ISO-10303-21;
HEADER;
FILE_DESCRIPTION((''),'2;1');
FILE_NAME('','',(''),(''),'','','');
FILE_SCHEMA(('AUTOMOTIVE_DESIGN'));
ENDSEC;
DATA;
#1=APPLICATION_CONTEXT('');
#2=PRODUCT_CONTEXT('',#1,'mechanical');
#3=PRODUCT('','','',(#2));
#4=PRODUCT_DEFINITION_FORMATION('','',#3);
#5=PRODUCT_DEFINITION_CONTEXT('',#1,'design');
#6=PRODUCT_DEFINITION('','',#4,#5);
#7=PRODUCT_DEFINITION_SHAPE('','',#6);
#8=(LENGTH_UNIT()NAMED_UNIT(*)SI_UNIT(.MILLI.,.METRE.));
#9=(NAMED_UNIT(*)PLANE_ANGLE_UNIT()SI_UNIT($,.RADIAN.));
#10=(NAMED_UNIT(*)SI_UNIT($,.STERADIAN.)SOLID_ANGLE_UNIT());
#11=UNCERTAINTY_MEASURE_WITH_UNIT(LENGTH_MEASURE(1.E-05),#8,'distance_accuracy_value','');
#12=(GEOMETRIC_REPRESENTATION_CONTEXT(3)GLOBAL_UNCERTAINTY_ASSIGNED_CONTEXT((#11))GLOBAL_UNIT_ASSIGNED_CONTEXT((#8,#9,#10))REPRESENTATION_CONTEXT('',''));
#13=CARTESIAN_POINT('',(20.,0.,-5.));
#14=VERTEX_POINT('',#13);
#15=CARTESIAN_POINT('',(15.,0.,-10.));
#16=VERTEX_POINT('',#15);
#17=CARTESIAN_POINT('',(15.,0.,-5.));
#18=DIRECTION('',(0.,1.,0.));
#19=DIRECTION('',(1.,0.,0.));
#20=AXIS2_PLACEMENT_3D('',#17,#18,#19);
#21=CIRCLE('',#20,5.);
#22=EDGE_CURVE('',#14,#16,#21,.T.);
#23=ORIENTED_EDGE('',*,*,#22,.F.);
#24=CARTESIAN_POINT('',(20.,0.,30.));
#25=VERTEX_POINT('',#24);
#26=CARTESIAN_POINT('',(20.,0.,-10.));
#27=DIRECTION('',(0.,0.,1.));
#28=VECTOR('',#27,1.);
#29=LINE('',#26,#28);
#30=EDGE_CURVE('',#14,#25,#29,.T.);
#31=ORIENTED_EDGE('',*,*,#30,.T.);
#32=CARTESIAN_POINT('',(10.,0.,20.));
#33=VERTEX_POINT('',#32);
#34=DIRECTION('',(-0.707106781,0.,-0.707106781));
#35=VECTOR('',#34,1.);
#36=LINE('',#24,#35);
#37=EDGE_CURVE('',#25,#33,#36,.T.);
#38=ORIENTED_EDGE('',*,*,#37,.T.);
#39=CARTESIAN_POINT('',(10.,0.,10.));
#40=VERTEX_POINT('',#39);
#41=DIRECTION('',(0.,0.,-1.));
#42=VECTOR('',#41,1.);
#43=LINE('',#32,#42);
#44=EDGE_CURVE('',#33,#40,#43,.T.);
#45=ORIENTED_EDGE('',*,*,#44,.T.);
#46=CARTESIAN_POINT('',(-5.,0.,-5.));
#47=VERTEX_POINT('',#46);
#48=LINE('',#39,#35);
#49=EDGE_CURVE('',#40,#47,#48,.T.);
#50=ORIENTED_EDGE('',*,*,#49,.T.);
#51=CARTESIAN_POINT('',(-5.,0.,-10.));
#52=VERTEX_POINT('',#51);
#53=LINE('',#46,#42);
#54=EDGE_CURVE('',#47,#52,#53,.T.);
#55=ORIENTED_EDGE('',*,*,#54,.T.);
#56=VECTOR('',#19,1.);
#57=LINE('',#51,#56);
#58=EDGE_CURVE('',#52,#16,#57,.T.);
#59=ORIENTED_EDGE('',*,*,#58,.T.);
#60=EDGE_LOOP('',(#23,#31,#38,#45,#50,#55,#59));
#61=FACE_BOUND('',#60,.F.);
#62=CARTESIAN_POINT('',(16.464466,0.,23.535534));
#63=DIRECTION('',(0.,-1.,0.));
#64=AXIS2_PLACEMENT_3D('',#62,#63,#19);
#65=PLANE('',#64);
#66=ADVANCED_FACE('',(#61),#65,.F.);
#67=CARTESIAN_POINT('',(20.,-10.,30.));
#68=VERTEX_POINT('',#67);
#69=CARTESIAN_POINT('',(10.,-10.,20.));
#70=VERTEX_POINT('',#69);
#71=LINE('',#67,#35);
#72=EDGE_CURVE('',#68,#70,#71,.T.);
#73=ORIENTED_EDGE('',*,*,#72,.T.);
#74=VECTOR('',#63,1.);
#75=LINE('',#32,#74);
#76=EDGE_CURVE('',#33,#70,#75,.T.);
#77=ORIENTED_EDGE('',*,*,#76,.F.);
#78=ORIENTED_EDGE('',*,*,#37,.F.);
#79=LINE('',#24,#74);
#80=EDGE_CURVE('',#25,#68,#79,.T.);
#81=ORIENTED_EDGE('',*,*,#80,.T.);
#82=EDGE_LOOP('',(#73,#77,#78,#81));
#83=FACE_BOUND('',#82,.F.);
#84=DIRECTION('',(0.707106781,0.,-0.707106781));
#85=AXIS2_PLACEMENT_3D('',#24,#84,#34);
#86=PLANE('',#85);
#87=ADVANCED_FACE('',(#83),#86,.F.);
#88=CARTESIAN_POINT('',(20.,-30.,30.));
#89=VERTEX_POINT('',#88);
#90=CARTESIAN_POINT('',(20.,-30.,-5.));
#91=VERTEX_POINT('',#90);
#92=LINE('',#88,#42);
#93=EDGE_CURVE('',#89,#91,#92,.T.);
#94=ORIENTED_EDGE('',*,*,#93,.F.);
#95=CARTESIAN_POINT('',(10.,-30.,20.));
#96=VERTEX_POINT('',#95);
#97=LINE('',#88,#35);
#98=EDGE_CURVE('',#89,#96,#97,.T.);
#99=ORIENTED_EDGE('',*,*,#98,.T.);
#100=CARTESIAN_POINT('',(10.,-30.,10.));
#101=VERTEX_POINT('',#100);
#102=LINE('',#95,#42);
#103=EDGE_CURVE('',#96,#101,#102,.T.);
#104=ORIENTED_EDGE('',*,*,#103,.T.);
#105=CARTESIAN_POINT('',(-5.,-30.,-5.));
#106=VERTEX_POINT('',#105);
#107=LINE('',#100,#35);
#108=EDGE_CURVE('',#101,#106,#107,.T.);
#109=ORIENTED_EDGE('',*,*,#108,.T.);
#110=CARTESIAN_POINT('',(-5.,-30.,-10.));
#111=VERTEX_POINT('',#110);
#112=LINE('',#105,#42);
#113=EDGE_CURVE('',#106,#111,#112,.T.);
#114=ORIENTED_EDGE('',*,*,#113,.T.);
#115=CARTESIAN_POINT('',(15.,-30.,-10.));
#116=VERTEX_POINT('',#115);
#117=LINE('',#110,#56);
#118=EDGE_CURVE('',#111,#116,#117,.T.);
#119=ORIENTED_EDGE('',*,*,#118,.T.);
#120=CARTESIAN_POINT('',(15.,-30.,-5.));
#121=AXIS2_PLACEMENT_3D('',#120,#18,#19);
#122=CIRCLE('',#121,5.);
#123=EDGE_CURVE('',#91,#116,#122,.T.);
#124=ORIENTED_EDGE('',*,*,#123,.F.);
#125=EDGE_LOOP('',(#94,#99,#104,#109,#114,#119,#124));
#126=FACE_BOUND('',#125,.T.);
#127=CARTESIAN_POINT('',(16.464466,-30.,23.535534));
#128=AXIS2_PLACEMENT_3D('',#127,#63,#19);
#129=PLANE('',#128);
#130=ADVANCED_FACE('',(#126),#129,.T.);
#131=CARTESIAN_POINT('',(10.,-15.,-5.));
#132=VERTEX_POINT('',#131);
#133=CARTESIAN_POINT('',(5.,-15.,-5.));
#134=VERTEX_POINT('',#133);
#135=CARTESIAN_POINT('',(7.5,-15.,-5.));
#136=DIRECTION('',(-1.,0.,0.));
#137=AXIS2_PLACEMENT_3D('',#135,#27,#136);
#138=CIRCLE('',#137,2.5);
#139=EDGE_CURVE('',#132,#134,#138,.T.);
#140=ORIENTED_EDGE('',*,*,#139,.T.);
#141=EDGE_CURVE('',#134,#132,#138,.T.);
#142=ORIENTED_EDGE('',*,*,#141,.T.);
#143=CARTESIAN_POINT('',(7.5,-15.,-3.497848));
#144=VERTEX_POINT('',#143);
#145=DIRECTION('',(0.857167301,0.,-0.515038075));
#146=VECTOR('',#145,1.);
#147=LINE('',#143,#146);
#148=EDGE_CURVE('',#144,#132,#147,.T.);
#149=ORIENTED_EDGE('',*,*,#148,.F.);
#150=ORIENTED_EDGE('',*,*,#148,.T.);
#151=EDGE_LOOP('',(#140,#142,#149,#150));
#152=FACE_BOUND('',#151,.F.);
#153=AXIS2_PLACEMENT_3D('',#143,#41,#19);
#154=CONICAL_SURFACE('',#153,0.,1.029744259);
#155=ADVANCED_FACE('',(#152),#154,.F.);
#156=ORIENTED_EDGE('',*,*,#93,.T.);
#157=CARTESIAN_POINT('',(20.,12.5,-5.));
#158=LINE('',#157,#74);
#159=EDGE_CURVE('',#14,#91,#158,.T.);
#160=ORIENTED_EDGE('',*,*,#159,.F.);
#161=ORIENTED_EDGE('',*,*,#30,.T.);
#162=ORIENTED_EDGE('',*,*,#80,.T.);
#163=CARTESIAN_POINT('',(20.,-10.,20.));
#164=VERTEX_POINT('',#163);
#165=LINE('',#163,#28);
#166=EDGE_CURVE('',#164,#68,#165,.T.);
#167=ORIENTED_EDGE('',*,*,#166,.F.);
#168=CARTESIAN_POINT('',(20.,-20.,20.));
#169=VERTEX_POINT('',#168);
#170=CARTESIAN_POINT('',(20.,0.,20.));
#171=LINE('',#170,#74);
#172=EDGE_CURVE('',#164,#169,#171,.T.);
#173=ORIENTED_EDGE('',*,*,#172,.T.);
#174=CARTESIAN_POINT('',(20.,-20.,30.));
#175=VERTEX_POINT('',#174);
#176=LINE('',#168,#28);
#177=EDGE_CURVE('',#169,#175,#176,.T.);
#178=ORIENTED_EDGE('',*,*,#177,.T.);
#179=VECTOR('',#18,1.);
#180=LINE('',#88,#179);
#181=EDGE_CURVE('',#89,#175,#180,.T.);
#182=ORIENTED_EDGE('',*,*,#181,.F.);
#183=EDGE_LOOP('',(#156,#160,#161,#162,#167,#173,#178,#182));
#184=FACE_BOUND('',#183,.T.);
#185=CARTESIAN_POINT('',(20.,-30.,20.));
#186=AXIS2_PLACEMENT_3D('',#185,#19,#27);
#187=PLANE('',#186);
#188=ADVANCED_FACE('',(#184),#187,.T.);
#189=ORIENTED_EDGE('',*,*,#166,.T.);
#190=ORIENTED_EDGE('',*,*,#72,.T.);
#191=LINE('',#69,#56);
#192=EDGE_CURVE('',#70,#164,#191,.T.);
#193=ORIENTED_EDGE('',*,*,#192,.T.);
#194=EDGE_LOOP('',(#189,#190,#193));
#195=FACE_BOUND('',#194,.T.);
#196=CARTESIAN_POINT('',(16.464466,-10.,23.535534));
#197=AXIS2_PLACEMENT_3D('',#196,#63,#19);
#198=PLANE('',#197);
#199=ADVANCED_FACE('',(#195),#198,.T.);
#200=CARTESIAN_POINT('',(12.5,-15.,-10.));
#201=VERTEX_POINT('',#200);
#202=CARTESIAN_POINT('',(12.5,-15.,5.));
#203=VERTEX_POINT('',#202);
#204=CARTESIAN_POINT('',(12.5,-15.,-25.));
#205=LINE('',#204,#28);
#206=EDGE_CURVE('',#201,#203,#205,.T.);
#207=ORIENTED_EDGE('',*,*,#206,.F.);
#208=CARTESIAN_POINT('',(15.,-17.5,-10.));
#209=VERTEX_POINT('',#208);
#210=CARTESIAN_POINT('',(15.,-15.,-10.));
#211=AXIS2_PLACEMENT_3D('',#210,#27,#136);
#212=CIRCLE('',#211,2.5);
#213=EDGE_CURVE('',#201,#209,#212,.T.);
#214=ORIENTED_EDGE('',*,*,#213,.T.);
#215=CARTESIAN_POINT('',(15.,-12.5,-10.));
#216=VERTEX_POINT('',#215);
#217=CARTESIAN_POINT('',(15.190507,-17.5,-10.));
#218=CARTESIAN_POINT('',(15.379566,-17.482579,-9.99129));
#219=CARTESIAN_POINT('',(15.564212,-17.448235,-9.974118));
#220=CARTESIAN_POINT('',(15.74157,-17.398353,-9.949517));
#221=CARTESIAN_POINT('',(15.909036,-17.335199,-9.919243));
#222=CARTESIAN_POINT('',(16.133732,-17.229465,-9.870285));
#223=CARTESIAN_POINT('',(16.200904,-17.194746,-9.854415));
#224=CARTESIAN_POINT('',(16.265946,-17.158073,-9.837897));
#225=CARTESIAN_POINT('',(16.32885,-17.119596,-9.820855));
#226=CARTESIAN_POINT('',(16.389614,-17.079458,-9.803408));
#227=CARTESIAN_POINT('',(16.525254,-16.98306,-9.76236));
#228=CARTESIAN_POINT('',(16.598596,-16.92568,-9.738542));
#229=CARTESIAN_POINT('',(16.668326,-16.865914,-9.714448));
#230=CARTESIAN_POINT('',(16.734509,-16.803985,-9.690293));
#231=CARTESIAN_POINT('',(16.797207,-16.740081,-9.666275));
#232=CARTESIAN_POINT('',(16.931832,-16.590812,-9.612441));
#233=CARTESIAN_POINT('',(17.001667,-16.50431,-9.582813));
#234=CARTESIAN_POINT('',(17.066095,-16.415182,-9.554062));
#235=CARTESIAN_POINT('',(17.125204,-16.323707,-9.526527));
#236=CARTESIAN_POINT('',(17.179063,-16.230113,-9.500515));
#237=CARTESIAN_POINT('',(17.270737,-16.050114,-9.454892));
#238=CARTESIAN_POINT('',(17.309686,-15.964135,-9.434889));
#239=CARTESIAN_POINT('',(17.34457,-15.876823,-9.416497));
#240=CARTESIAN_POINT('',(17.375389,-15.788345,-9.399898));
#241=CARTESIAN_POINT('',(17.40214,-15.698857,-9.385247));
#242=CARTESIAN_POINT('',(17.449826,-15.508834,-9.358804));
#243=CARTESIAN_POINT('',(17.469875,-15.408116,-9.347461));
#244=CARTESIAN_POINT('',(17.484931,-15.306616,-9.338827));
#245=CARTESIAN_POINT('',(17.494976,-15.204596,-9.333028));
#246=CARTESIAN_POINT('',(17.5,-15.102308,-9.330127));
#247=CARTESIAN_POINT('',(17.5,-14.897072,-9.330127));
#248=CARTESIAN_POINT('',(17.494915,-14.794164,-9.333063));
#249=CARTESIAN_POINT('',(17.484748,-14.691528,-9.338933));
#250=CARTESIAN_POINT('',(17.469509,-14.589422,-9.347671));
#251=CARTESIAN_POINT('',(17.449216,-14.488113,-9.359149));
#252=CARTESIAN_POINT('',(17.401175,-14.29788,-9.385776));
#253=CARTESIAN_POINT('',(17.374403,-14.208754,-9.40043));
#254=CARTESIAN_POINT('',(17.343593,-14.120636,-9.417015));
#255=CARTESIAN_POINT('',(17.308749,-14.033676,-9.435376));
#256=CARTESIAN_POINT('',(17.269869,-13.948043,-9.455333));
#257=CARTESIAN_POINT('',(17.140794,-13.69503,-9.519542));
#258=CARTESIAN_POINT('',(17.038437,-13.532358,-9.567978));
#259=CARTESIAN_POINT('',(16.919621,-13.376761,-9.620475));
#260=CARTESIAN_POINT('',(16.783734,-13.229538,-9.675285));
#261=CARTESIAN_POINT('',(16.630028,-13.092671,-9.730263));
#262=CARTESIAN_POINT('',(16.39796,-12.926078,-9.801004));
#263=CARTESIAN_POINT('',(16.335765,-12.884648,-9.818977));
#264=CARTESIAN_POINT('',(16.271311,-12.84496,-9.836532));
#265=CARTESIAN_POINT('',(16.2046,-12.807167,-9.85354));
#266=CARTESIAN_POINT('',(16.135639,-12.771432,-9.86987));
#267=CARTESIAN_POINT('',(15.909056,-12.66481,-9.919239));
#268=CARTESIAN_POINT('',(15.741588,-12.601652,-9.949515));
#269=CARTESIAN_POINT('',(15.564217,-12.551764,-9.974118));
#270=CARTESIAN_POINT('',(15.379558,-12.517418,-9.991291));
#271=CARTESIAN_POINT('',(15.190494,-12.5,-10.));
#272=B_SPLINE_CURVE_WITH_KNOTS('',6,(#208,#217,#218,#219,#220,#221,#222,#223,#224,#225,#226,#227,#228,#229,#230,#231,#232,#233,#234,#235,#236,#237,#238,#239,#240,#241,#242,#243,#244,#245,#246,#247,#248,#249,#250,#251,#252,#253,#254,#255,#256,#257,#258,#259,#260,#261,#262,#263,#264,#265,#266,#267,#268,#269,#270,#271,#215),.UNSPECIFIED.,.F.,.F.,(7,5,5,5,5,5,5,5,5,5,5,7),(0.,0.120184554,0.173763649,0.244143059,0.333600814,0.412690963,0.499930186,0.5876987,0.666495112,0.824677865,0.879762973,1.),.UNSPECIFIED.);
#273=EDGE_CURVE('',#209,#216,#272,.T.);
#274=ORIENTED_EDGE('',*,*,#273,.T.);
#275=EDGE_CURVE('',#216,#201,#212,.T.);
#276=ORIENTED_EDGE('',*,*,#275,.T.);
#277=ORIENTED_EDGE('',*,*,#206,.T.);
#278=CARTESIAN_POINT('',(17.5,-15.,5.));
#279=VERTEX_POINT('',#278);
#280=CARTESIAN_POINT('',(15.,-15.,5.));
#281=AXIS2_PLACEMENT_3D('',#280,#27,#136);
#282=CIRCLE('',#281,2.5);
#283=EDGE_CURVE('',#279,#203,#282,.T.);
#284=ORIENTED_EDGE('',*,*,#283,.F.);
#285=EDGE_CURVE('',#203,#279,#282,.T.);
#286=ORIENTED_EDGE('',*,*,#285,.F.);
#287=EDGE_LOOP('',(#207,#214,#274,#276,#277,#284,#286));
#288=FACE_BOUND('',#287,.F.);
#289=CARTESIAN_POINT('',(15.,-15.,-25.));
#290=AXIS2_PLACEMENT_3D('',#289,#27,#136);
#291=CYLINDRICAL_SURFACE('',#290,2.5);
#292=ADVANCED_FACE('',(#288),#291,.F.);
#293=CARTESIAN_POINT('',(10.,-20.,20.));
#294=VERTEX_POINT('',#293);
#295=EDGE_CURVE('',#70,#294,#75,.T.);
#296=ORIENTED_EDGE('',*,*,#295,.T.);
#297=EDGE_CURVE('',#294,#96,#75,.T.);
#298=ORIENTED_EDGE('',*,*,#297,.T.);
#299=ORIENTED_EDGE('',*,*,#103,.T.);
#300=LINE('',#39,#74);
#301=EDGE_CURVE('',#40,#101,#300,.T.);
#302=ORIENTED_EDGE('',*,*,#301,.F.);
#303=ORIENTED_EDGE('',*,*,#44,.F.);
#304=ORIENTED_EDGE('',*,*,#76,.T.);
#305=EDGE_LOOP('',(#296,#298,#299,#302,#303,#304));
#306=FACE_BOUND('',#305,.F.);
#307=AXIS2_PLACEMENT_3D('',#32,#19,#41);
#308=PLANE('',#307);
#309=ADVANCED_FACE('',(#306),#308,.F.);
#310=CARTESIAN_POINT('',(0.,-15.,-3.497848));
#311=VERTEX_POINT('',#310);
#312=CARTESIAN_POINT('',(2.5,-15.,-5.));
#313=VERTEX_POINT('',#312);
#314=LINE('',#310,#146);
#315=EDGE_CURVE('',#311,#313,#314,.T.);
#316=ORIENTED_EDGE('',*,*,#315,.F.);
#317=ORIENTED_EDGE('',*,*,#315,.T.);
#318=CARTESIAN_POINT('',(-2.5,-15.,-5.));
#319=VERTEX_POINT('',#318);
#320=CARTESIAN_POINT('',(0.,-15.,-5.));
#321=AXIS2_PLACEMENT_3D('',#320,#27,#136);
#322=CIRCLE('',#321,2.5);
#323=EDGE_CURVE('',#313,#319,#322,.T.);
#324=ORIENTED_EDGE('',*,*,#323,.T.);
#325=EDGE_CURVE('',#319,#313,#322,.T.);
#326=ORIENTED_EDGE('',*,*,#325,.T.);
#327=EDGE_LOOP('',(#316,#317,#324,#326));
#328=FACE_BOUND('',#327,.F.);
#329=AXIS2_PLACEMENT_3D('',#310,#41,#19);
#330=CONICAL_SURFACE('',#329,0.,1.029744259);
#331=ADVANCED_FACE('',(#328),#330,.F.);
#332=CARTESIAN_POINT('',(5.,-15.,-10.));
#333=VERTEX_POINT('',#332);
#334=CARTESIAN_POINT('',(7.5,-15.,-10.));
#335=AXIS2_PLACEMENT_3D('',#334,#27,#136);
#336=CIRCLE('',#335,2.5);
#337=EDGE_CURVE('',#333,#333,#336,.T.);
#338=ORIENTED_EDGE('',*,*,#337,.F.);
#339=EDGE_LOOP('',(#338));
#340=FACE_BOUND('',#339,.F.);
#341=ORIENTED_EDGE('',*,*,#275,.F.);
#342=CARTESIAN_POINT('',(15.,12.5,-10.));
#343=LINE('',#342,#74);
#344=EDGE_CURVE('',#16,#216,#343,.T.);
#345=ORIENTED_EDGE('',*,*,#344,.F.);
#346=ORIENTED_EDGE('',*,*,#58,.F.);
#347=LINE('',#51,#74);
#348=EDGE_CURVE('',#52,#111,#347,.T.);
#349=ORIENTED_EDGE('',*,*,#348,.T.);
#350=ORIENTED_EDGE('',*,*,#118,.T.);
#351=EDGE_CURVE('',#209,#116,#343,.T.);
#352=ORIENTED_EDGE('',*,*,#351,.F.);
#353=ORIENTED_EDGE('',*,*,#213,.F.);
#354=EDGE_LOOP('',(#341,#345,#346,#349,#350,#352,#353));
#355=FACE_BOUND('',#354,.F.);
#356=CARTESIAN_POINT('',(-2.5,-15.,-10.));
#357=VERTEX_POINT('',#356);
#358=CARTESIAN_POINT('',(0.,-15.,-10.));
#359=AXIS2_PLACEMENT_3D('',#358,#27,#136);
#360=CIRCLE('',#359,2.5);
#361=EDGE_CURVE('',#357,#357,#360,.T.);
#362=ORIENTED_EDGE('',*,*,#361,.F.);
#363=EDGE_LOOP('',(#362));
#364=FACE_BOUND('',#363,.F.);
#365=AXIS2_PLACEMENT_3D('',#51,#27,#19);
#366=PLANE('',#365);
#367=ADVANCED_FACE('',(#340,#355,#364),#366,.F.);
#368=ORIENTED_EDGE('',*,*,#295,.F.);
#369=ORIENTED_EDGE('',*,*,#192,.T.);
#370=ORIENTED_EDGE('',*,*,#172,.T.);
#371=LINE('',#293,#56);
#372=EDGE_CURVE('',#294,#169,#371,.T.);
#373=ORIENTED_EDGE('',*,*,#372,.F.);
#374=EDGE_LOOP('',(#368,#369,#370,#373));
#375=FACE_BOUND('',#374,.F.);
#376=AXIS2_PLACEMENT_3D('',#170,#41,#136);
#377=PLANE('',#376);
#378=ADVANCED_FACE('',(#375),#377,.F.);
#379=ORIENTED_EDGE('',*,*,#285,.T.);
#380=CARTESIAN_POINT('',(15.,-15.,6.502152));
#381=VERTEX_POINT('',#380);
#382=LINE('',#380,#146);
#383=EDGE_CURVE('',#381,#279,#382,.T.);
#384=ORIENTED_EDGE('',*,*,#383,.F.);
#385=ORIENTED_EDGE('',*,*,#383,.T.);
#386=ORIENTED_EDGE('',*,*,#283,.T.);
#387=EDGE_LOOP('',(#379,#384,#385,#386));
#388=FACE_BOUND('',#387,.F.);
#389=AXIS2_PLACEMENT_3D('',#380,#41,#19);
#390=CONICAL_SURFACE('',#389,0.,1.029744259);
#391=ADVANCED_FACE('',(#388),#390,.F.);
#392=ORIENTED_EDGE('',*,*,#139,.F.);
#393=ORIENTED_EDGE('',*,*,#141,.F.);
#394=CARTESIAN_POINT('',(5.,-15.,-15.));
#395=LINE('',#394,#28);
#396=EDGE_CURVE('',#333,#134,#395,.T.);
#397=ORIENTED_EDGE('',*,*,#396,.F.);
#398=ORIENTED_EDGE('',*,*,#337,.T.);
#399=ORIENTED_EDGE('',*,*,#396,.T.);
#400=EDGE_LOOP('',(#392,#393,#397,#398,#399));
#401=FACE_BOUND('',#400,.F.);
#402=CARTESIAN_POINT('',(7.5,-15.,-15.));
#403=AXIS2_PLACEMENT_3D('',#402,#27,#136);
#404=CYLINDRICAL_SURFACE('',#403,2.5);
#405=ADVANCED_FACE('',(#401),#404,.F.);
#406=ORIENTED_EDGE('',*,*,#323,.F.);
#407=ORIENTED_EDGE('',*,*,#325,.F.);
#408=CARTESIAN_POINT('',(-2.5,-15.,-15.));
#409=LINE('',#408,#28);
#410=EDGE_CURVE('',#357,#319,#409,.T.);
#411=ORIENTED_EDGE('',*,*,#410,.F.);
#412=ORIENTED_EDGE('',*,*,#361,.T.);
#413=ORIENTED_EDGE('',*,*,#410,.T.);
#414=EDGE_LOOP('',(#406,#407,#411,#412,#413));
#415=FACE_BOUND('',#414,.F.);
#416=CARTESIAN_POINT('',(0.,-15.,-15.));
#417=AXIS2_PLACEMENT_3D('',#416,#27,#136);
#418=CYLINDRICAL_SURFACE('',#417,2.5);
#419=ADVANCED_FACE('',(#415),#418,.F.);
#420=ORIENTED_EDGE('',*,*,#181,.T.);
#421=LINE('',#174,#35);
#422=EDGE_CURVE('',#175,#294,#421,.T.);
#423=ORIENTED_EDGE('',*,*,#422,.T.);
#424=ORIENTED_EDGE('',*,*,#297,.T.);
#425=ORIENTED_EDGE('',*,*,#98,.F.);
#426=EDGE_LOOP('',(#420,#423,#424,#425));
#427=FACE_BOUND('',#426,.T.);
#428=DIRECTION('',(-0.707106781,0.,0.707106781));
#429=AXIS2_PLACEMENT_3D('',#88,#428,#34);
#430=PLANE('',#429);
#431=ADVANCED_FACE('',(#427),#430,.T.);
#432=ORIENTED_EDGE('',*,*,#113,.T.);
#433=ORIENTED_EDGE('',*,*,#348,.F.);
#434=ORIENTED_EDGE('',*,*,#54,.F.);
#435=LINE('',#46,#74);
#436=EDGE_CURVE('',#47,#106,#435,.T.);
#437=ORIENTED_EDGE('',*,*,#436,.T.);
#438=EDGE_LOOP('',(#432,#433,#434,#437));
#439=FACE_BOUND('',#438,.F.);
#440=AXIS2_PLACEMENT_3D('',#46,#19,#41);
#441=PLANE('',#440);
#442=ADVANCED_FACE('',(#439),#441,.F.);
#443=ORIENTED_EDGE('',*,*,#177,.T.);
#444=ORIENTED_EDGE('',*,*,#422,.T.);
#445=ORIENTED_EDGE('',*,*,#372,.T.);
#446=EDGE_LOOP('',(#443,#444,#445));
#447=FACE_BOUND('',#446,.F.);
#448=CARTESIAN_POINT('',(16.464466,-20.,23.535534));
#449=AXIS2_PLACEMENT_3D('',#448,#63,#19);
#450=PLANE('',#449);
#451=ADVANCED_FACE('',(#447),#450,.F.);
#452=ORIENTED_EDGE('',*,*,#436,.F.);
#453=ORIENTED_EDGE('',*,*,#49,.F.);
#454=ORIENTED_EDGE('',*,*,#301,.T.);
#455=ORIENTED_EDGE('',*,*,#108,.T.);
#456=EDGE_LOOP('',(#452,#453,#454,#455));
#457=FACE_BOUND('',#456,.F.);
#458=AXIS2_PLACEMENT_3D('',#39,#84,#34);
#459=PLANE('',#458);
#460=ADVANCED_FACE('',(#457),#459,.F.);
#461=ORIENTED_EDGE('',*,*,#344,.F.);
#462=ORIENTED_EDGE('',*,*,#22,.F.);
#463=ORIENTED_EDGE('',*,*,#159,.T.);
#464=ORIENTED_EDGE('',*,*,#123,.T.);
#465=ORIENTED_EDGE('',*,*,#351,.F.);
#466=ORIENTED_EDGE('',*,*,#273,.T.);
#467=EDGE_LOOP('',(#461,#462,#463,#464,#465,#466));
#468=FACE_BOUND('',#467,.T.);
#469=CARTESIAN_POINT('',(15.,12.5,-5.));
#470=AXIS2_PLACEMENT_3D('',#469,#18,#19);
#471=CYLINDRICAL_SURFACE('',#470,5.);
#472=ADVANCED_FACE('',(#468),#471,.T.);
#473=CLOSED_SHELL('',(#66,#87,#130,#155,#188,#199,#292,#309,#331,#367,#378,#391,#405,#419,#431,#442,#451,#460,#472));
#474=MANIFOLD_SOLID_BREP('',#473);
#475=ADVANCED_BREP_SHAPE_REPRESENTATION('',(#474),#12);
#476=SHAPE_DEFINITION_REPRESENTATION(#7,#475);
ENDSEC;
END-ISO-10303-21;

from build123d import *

# Parameters (mm, degrees)
F5_W        = 10
F5_H        = 10
F0_DEPTH    = 30
F1_DEPTH    = 10
F7_DEPTH    = 10
F3_D        = 5
F3_DEPTH    = 15
F3_TIP      = 1.5021515476
F8_D        = 5
F8_DEPTH    = 5
F8_TIP      = 1.5021515476
F4_T1_DEPTH = 55


# Not quite as in the source:
# - a fillet or chamfer that OpenCascade refuses, or shapes differently, is made with other operations: its cross-section is extruded or revolved along the edge and cut away or added


with BuildPart() as f0:
    # F5 (on Front) → F0 (new body)
    with BuildSketch(Plane.XZ):
        Polygon((10, 20), (10, 10), (20, 20), align=None)
        Polygon((20, 20), (10, 10), (20, 10), align=None)
        with Locations((15, 5)):
            Rectangle(F5_W, F5_H)
        Polygon((10, 10), (0, 0), (10, 0), align=None)
        Polygon((10, 0), (0, 0), (-5, -5), (-5, -10), (20, -10), (20, 0), align=None)
    extrude(amount=F0_DEPTH)

    # F5 (on Front) → F1 (join)
    with BuildSketch(Plane.XZ):
        Polygon((10, 20), (20, 20), (20, 30), align=None)
    extrude(amount=F1_DEPTH)

    # F6 (on face) → F7 (join)
    with BuildSketch(Plane.XZ.offset(30)):
        Polygon((10, 20), (20, 20), (20, 30), align=None)
    extrude(amount=-F7_DEPTH)

    # F3
    with Locations(Plane(origin=(0, 0, -10), x_dir=(1, 0, 0), z_dir=(0, 0, -1))):
        with Locations((15, 15)):
            Hole(F3_D / 2, depth=F3_DEPTH)
            with Locations((0, 0, -(F3_DEPTH + F3_TIP / 2))):  # 118° drill point
                Cone(0, F3_D / 2, F3_TIP, mode=Mode.SUBTRACT)

    # F8
    with Locations(Plane(origin=(0, 0, -10), x_dir=(1, 0, 0), z_dir=(0, 0, -1))):
        with Locations((7.5, 15), (0, 15)):
            Hole(F8_D / 2, depth=F8_DEPTH)
            with Locations((0, 0, -(F8_DEPTH + F8_TIP / 2))):  # 118° drill point
                Cone(0, F8_D / 2, F8_TIP, mode=Mode.SUBTRACT)

    # F4: fillet of radius 5 on 1 edges, made by hand

    # F4_s2 → F4_t1 (cut)
    with BuildSketch(Plane.XZ.offset(-12.5)):
        with BuildLine():
            ThreePointArc((20, -5), (18.5355339059, -8.5355339059), (15, -10))
            Line((15, -10), (20, -10))
            Line((20, -10), (20, -5))
        make_face()
    extrude(amount=F4_T1_DEPTH, mode=Mode.SUBTRACT)


solid = f0.part
